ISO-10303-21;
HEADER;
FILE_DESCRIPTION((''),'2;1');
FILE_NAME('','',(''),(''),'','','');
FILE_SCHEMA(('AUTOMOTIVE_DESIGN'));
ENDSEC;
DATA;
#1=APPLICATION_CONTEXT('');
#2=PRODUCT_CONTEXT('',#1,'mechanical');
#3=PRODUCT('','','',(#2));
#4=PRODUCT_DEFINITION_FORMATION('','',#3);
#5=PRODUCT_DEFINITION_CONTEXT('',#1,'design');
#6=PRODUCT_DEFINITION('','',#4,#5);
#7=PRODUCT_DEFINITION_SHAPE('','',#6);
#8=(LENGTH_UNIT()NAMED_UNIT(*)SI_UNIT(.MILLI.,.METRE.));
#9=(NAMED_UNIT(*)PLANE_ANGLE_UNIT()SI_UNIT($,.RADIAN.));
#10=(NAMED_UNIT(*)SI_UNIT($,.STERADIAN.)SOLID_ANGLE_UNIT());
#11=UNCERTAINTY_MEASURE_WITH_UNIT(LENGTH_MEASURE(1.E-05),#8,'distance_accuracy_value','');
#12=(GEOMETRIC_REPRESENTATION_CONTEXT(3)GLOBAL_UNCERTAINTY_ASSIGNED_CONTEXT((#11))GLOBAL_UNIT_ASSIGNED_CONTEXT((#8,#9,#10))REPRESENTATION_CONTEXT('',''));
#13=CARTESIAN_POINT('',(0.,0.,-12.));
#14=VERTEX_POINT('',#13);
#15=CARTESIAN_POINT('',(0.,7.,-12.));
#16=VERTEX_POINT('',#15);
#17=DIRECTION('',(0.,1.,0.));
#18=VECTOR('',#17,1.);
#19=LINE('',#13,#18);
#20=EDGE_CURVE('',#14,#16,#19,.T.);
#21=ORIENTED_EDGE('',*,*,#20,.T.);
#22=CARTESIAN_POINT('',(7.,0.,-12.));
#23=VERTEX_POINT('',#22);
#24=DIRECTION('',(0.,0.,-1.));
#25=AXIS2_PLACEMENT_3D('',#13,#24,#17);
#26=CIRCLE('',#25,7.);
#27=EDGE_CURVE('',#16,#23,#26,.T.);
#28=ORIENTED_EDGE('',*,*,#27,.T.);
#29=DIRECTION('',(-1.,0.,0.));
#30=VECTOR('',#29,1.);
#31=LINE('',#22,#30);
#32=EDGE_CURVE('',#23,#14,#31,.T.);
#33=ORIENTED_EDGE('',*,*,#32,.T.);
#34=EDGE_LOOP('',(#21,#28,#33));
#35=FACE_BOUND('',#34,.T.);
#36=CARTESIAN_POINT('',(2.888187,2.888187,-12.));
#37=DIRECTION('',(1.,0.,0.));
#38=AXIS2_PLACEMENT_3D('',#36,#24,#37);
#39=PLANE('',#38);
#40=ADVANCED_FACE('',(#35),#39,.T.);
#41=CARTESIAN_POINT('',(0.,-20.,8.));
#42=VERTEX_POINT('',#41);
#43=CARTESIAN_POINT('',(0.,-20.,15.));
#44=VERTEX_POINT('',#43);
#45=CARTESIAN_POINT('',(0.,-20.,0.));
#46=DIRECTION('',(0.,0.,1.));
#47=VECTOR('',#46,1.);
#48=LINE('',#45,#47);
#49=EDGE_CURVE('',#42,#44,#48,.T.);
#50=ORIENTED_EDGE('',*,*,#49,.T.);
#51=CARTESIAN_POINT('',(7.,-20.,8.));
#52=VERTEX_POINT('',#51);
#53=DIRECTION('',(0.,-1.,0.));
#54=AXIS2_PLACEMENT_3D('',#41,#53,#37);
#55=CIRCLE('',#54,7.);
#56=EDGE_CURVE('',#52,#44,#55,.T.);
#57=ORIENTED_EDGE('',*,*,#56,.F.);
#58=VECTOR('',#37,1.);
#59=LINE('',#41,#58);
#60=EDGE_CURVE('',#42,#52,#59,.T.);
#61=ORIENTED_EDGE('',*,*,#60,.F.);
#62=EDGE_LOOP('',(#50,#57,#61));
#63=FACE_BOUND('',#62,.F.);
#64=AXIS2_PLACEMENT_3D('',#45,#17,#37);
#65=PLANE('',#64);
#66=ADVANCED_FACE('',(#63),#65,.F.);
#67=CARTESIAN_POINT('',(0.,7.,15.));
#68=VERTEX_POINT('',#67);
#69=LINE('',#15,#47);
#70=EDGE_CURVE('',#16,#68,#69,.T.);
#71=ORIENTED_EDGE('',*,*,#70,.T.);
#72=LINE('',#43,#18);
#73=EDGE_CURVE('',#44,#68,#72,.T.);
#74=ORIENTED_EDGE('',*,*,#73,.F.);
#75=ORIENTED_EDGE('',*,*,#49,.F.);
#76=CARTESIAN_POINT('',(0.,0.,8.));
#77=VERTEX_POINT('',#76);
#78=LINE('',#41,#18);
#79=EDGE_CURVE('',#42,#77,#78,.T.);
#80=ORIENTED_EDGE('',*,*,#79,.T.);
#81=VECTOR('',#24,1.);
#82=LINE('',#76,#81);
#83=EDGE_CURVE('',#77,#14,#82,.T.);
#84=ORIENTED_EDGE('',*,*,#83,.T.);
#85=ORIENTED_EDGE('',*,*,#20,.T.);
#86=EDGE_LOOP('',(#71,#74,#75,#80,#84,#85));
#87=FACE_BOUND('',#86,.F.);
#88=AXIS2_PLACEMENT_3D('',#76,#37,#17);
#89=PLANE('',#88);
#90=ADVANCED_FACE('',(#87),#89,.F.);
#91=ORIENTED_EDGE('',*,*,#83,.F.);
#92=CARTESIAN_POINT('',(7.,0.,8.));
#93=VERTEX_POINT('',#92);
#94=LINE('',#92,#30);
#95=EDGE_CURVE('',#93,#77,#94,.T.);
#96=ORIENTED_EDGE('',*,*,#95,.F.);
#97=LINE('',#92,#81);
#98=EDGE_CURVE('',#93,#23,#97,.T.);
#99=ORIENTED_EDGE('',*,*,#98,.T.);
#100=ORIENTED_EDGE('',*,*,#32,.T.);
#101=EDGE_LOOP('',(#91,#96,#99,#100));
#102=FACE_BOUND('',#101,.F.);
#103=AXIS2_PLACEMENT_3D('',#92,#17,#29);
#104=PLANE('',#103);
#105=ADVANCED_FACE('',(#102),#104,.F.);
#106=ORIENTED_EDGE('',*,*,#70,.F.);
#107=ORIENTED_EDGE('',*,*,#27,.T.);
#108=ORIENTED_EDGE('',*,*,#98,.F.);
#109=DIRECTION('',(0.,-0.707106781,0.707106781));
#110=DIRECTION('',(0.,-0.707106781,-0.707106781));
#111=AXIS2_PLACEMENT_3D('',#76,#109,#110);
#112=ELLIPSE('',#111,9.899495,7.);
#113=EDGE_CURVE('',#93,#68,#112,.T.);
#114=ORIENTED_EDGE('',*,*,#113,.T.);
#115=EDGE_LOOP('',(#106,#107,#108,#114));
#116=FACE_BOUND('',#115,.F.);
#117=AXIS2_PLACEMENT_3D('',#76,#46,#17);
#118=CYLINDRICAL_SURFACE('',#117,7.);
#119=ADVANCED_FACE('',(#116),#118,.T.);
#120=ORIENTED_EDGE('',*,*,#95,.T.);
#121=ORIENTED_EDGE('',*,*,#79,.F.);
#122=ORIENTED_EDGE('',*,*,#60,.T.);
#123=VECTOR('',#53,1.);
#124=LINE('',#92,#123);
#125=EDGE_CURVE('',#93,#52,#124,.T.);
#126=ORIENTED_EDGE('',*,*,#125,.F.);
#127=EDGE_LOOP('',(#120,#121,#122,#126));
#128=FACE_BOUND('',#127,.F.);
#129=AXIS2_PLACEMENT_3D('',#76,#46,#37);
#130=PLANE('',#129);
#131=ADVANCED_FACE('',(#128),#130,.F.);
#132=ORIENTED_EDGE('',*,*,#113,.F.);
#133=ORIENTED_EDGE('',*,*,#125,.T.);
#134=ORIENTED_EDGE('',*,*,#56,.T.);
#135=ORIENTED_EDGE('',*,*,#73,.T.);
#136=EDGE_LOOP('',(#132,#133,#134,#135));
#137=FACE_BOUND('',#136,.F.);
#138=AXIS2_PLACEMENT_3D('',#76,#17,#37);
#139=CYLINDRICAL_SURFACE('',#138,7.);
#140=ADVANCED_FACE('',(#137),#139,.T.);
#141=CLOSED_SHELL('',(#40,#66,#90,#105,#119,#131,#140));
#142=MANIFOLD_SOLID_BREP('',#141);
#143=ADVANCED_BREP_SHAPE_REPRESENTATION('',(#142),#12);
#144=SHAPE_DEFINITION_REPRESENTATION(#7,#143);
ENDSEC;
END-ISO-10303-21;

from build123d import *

# Parameters (mm, degrees)
F1_DEPTH      = 15
F3_DEPTH      = 15
F3_DEPTH_BACK = 7
F6_DEPTH      = 20
F7_DEPTH      = 20


with BuildPart() as f1:
    # F0 (on Top) → F1 (new body)
    with BuildSketch(Plane.XY):
        with BuildLine():
            Line((0, 0), (7, 0))
            ThreePointArc((7, 0), (4.9497474683, 4.9497474683), (0, 7))
            Line((0, 7), (0, 0))
        make_face()
    extrude(amount=F1_DEPTH)


with BuildPart() as f3:
    # F2 (on face) → F3 (new body, two sides)
    with BuildSketch(Plane.XZ) as f3_sk:
        with BuildLine():
            ThreePointArc((7, 8), (4.9497474683, 12.9497474683), (0, 15))
            Line((0, 15), (0, 8))
            Line((0, 8), (7, 8))
        make_face()
    extrude(amount=F3_DEPTH)
    extrude(f3_sk.sketch, amount=-F3_DEPTH_BACK)

    # F4: intersect F1
    add(f1.part, mode=Mode.INTERSECT)

    # F6 (add): a face of the model
    f6_faces = [f3.faces().sort_by_distance(p)[0] for p in [
        (2.970892271, 0, 10.970892271),
    ]]
    extrude(f6_faces, amount=F6_DEPTH)

    # F5 (on face) → F7 (join)
    with BuildSketch(Plane(origin=(0, 0, 8), x_dir=(1, 0, 0), z_dir=(0, 0, -1))):
        with BuildLine():
            ThreePointArc((0, -7), (4.9497474683, -4.9497474683), (7, 0))
            Line((7, 0), (0, 0))
            Line((0, 0), (0, -7))
        make_face()
    extrude(amount=F7_DEPTH)


solid = f3.part
